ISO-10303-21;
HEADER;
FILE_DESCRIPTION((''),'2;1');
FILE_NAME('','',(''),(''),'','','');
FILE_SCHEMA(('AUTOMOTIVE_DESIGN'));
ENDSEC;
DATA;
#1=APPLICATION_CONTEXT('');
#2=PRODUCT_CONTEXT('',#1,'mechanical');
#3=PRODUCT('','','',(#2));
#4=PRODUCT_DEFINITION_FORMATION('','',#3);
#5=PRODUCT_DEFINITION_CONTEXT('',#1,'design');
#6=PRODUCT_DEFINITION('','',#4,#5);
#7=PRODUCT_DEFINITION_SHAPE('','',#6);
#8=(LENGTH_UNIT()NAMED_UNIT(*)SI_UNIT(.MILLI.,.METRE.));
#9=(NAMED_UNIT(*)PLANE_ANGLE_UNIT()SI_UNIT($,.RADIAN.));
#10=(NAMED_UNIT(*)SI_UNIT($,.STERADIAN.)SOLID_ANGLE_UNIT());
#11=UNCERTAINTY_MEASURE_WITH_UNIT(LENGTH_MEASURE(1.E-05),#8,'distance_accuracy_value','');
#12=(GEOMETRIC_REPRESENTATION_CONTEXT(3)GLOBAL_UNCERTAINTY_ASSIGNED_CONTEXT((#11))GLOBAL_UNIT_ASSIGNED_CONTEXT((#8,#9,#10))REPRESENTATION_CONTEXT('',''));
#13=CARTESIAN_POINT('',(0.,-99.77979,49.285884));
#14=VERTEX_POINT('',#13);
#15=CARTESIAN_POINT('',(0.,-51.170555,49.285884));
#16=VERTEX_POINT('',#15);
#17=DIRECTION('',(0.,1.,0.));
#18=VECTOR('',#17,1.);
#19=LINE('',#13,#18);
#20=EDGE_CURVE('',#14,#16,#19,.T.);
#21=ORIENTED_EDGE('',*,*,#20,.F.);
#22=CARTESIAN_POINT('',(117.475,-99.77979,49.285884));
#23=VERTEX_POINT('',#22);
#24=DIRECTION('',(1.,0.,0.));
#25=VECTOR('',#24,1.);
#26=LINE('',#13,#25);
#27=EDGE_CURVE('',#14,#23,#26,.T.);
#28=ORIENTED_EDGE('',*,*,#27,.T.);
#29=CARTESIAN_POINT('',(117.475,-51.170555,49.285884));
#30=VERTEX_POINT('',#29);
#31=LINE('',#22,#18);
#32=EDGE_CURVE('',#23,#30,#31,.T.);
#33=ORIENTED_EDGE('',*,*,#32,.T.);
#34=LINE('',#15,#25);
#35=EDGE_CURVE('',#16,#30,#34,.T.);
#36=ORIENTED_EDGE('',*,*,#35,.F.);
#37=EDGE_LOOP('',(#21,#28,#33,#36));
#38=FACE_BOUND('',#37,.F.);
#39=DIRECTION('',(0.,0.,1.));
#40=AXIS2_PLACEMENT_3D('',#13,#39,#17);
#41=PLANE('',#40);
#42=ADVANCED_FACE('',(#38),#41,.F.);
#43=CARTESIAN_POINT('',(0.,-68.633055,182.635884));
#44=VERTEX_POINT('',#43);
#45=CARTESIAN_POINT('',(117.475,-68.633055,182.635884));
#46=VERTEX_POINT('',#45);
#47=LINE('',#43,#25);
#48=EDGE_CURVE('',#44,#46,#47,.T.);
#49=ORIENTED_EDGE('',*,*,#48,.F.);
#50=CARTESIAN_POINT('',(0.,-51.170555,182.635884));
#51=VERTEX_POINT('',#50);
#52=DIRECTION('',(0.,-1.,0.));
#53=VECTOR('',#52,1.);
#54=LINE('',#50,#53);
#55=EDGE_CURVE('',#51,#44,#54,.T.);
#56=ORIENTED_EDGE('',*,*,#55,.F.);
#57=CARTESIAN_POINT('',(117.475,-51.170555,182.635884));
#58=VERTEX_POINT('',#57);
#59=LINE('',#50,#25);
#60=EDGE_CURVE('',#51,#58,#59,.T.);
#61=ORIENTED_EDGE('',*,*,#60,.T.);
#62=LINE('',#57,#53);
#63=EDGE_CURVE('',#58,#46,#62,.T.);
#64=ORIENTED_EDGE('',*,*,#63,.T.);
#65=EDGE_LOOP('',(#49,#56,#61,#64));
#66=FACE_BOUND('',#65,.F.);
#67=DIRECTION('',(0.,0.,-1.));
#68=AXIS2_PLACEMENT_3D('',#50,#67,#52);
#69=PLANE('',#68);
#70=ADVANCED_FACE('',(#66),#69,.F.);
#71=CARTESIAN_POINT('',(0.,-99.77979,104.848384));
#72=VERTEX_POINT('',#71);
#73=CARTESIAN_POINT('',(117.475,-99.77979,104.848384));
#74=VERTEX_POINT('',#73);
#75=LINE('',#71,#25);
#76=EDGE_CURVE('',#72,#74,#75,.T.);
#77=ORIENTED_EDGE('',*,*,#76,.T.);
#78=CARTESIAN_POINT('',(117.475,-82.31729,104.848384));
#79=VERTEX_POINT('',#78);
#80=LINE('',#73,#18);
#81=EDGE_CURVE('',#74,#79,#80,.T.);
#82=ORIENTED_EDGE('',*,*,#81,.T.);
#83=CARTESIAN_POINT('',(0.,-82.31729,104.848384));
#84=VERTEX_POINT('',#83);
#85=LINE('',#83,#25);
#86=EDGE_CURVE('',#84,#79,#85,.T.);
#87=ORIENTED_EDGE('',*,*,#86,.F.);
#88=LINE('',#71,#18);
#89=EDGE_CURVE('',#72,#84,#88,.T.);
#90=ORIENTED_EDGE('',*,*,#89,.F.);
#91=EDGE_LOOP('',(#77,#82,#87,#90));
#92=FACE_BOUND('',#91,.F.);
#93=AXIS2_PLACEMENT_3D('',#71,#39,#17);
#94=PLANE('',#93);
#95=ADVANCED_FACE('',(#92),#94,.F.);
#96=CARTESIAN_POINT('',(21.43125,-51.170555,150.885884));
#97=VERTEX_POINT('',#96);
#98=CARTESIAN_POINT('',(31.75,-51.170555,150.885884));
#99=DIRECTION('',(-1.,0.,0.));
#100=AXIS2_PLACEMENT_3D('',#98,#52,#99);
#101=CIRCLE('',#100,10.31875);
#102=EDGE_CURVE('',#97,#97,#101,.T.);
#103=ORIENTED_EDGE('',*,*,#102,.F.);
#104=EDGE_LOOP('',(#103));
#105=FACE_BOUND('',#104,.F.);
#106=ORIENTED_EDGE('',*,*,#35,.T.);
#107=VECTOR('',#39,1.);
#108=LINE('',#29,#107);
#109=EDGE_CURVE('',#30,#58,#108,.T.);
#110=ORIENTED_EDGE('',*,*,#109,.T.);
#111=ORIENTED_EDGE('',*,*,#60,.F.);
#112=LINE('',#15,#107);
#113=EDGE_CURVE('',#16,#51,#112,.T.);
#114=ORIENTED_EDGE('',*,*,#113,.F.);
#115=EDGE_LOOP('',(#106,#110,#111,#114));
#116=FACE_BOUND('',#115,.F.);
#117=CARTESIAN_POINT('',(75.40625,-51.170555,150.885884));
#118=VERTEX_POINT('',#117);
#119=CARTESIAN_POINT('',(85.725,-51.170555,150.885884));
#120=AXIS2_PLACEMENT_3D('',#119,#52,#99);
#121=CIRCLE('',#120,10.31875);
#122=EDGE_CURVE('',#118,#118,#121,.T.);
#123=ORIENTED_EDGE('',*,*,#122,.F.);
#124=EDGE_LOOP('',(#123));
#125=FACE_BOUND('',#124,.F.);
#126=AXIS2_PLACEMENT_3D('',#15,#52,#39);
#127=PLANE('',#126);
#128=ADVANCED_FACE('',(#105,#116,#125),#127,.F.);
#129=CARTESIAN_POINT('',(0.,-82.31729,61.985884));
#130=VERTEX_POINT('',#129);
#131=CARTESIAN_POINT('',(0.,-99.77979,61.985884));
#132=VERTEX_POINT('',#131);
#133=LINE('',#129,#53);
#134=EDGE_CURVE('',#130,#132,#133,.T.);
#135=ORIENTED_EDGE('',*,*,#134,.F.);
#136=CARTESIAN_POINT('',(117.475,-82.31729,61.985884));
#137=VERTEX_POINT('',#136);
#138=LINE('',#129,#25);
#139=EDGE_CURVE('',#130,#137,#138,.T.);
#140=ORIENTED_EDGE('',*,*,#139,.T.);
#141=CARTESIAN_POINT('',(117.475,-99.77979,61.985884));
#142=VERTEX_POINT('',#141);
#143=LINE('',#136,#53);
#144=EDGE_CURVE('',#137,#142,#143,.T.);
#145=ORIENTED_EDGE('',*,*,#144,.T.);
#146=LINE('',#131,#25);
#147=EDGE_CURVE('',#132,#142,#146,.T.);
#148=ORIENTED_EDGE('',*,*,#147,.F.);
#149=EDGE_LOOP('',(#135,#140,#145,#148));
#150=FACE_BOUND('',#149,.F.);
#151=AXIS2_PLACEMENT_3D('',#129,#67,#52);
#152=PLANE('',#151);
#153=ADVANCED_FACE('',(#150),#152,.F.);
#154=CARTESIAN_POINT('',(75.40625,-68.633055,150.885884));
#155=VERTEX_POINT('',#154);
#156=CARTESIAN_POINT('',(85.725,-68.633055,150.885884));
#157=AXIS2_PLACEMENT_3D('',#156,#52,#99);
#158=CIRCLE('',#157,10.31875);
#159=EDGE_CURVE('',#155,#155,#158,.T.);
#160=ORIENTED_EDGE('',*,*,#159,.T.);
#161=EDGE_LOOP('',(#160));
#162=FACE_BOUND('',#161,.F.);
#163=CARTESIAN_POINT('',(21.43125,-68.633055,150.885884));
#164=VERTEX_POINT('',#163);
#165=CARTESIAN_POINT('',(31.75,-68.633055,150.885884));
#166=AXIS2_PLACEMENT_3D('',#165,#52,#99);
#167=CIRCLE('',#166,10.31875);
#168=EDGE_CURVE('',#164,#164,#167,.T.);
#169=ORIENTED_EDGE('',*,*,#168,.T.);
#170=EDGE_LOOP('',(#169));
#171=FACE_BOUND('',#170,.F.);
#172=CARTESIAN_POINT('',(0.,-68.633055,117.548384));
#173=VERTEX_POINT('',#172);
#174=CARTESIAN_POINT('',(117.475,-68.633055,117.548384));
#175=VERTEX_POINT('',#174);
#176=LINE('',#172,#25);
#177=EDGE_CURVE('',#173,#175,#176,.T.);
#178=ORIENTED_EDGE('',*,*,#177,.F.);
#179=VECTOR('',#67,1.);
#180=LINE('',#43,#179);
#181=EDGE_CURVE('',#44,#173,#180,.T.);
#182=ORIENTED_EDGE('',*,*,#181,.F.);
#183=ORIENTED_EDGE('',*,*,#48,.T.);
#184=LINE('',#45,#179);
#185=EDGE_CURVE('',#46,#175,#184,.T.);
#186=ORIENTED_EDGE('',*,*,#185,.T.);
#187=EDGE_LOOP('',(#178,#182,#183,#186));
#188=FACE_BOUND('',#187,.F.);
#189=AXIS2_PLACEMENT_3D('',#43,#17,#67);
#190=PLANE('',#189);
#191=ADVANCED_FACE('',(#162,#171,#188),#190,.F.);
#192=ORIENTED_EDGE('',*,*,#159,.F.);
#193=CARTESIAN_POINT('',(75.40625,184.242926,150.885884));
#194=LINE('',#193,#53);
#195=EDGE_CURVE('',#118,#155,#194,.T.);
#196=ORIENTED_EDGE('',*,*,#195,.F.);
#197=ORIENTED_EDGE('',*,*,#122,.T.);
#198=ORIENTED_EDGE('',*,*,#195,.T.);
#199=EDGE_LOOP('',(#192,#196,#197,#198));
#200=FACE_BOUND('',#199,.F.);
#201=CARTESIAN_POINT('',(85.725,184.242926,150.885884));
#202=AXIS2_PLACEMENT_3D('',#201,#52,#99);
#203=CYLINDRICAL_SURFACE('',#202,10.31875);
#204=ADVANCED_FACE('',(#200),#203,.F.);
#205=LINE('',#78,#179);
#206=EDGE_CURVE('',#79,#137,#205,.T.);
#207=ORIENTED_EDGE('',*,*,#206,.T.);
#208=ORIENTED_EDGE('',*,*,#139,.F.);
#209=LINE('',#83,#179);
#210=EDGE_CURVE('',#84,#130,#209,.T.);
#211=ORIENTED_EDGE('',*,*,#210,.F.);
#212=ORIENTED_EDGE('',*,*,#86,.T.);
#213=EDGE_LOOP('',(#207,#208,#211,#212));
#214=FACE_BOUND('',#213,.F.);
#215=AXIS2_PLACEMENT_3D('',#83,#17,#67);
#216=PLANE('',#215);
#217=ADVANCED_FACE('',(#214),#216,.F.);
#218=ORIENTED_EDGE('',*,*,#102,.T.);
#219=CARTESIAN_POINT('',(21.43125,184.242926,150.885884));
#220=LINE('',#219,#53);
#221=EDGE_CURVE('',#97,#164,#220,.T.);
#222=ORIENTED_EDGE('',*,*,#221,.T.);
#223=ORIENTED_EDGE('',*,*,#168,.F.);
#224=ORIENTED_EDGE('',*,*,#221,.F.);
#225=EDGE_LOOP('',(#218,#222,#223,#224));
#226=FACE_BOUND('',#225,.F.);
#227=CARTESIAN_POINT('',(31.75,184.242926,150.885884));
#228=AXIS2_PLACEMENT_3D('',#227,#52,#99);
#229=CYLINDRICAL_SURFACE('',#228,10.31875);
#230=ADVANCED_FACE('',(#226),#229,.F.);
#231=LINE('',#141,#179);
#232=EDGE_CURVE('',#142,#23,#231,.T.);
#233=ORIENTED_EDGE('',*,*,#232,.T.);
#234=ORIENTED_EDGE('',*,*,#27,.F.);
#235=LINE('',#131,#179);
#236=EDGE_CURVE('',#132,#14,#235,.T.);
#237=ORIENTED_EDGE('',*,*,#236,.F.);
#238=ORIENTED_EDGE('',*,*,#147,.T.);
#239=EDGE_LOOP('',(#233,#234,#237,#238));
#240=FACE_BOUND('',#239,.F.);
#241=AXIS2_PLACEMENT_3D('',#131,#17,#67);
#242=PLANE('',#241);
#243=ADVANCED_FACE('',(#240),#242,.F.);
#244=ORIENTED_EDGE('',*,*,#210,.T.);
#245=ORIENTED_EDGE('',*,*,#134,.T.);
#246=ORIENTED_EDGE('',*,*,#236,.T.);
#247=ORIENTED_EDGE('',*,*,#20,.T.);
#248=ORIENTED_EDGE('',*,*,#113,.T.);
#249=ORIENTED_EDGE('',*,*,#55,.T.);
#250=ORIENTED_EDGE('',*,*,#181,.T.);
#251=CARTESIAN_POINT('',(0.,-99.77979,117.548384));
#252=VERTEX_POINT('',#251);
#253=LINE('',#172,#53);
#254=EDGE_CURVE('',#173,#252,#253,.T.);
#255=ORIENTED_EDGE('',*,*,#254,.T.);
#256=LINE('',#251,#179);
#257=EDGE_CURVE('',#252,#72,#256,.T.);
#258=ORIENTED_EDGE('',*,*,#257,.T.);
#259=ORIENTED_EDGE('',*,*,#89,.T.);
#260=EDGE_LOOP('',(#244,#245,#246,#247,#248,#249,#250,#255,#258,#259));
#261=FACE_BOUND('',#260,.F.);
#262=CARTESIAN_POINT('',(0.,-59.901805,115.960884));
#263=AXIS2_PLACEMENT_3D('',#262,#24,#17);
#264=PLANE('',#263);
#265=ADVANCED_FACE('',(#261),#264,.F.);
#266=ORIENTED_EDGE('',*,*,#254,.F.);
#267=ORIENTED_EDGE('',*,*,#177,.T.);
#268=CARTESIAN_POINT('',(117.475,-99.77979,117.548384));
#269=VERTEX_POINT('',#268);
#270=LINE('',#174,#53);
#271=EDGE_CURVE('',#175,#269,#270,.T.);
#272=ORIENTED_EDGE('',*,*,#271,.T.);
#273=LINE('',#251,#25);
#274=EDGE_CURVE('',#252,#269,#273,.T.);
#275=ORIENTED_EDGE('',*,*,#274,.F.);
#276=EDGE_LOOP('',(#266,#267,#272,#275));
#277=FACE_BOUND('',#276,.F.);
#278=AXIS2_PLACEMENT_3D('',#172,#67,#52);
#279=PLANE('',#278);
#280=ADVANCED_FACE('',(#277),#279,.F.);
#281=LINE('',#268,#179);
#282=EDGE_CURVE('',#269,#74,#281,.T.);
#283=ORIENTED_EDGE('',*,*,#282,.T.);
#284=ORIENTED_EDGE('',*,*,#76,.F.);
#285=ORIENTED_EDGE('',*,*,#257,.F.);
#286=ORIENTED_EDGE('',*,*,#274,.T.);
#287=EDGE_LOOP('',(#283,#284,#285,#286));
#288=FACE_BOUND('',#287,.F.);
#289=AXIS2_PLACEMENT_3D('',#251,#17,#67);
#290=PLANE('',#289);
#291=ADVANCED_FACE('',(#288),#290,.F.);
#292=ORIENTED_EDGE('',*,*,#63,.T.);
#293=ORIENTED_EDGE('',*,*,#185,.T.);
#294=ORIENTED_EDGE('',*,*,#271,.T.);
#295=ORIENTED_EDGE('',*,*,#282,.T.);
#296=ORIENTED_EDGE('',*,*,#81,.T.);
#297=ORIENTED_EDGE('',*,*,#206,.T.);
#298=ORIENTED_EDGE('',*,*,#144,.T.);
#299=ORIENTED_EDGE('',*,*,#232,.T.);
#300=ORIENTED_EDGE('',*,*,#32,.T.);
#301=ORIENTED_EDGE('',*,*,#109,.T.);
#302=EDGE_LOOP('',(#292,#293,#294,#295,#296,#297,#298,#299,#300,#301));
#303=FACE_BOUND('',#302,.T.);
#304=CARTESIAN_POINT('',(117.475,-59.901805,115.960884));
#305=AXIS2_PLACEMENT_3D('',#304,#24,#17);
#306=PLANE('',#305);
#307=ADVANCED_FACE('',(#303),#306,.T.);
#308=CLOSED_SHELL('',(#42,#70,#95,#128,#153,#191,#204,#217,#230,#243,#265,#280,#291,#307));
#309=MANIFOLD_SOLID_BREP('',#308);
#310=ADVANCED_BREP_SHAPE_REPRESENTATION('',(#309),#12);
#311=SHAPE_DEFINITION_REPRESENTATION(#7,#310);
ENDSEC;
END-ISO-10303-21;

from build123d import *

# Parameters (mm, degrees)
F1_DEPTH = 117.475
F3_D     = 20.6375


# Not quite as in the source:
# - a length typed as a fraction of an inch, garbled in the dataset ("3 / 203.2 mm" for 3/8 in), is restored


with BuildPart() as f1:
    # F0 (on Right) → F1 (new body)
    with BuildSketch(Plane.YZ):
        Polygon((-51.1705551147, 49.2858837724), (-51.1705551147, 182.6358837724), (-68.6330551147, 182.6358837724), (-68.6330551147, 117.5483837724), (-68.6330551147, 49.2858837724), align=None)
        Polygon((-99.7797900677, 49.2858837724), (-68.6330551147, 49.2858837724), (-68.6330551147, 117.5483837724), (-99.7797900677, 117.5483837724), (-99.7797900677, 104.8483837724), (-82.3172900677, 104.8483837724), (-82.3172900677, 61.9858837724), (-99.7797900677, 61.9858837724), align=None)
    extrude(amount=F1_DEPTH)

    # F3 (through all)
    with Locations(Plane(origin=(0, 0, 0), x_dir=(1, 0, 0), z_dir=(0, 1, 0))):
        with Locations((31.75, -150.8858837724), (85.725, -150.8858837724)):
            Hole(F3_D / 2)


solid = f1.part
